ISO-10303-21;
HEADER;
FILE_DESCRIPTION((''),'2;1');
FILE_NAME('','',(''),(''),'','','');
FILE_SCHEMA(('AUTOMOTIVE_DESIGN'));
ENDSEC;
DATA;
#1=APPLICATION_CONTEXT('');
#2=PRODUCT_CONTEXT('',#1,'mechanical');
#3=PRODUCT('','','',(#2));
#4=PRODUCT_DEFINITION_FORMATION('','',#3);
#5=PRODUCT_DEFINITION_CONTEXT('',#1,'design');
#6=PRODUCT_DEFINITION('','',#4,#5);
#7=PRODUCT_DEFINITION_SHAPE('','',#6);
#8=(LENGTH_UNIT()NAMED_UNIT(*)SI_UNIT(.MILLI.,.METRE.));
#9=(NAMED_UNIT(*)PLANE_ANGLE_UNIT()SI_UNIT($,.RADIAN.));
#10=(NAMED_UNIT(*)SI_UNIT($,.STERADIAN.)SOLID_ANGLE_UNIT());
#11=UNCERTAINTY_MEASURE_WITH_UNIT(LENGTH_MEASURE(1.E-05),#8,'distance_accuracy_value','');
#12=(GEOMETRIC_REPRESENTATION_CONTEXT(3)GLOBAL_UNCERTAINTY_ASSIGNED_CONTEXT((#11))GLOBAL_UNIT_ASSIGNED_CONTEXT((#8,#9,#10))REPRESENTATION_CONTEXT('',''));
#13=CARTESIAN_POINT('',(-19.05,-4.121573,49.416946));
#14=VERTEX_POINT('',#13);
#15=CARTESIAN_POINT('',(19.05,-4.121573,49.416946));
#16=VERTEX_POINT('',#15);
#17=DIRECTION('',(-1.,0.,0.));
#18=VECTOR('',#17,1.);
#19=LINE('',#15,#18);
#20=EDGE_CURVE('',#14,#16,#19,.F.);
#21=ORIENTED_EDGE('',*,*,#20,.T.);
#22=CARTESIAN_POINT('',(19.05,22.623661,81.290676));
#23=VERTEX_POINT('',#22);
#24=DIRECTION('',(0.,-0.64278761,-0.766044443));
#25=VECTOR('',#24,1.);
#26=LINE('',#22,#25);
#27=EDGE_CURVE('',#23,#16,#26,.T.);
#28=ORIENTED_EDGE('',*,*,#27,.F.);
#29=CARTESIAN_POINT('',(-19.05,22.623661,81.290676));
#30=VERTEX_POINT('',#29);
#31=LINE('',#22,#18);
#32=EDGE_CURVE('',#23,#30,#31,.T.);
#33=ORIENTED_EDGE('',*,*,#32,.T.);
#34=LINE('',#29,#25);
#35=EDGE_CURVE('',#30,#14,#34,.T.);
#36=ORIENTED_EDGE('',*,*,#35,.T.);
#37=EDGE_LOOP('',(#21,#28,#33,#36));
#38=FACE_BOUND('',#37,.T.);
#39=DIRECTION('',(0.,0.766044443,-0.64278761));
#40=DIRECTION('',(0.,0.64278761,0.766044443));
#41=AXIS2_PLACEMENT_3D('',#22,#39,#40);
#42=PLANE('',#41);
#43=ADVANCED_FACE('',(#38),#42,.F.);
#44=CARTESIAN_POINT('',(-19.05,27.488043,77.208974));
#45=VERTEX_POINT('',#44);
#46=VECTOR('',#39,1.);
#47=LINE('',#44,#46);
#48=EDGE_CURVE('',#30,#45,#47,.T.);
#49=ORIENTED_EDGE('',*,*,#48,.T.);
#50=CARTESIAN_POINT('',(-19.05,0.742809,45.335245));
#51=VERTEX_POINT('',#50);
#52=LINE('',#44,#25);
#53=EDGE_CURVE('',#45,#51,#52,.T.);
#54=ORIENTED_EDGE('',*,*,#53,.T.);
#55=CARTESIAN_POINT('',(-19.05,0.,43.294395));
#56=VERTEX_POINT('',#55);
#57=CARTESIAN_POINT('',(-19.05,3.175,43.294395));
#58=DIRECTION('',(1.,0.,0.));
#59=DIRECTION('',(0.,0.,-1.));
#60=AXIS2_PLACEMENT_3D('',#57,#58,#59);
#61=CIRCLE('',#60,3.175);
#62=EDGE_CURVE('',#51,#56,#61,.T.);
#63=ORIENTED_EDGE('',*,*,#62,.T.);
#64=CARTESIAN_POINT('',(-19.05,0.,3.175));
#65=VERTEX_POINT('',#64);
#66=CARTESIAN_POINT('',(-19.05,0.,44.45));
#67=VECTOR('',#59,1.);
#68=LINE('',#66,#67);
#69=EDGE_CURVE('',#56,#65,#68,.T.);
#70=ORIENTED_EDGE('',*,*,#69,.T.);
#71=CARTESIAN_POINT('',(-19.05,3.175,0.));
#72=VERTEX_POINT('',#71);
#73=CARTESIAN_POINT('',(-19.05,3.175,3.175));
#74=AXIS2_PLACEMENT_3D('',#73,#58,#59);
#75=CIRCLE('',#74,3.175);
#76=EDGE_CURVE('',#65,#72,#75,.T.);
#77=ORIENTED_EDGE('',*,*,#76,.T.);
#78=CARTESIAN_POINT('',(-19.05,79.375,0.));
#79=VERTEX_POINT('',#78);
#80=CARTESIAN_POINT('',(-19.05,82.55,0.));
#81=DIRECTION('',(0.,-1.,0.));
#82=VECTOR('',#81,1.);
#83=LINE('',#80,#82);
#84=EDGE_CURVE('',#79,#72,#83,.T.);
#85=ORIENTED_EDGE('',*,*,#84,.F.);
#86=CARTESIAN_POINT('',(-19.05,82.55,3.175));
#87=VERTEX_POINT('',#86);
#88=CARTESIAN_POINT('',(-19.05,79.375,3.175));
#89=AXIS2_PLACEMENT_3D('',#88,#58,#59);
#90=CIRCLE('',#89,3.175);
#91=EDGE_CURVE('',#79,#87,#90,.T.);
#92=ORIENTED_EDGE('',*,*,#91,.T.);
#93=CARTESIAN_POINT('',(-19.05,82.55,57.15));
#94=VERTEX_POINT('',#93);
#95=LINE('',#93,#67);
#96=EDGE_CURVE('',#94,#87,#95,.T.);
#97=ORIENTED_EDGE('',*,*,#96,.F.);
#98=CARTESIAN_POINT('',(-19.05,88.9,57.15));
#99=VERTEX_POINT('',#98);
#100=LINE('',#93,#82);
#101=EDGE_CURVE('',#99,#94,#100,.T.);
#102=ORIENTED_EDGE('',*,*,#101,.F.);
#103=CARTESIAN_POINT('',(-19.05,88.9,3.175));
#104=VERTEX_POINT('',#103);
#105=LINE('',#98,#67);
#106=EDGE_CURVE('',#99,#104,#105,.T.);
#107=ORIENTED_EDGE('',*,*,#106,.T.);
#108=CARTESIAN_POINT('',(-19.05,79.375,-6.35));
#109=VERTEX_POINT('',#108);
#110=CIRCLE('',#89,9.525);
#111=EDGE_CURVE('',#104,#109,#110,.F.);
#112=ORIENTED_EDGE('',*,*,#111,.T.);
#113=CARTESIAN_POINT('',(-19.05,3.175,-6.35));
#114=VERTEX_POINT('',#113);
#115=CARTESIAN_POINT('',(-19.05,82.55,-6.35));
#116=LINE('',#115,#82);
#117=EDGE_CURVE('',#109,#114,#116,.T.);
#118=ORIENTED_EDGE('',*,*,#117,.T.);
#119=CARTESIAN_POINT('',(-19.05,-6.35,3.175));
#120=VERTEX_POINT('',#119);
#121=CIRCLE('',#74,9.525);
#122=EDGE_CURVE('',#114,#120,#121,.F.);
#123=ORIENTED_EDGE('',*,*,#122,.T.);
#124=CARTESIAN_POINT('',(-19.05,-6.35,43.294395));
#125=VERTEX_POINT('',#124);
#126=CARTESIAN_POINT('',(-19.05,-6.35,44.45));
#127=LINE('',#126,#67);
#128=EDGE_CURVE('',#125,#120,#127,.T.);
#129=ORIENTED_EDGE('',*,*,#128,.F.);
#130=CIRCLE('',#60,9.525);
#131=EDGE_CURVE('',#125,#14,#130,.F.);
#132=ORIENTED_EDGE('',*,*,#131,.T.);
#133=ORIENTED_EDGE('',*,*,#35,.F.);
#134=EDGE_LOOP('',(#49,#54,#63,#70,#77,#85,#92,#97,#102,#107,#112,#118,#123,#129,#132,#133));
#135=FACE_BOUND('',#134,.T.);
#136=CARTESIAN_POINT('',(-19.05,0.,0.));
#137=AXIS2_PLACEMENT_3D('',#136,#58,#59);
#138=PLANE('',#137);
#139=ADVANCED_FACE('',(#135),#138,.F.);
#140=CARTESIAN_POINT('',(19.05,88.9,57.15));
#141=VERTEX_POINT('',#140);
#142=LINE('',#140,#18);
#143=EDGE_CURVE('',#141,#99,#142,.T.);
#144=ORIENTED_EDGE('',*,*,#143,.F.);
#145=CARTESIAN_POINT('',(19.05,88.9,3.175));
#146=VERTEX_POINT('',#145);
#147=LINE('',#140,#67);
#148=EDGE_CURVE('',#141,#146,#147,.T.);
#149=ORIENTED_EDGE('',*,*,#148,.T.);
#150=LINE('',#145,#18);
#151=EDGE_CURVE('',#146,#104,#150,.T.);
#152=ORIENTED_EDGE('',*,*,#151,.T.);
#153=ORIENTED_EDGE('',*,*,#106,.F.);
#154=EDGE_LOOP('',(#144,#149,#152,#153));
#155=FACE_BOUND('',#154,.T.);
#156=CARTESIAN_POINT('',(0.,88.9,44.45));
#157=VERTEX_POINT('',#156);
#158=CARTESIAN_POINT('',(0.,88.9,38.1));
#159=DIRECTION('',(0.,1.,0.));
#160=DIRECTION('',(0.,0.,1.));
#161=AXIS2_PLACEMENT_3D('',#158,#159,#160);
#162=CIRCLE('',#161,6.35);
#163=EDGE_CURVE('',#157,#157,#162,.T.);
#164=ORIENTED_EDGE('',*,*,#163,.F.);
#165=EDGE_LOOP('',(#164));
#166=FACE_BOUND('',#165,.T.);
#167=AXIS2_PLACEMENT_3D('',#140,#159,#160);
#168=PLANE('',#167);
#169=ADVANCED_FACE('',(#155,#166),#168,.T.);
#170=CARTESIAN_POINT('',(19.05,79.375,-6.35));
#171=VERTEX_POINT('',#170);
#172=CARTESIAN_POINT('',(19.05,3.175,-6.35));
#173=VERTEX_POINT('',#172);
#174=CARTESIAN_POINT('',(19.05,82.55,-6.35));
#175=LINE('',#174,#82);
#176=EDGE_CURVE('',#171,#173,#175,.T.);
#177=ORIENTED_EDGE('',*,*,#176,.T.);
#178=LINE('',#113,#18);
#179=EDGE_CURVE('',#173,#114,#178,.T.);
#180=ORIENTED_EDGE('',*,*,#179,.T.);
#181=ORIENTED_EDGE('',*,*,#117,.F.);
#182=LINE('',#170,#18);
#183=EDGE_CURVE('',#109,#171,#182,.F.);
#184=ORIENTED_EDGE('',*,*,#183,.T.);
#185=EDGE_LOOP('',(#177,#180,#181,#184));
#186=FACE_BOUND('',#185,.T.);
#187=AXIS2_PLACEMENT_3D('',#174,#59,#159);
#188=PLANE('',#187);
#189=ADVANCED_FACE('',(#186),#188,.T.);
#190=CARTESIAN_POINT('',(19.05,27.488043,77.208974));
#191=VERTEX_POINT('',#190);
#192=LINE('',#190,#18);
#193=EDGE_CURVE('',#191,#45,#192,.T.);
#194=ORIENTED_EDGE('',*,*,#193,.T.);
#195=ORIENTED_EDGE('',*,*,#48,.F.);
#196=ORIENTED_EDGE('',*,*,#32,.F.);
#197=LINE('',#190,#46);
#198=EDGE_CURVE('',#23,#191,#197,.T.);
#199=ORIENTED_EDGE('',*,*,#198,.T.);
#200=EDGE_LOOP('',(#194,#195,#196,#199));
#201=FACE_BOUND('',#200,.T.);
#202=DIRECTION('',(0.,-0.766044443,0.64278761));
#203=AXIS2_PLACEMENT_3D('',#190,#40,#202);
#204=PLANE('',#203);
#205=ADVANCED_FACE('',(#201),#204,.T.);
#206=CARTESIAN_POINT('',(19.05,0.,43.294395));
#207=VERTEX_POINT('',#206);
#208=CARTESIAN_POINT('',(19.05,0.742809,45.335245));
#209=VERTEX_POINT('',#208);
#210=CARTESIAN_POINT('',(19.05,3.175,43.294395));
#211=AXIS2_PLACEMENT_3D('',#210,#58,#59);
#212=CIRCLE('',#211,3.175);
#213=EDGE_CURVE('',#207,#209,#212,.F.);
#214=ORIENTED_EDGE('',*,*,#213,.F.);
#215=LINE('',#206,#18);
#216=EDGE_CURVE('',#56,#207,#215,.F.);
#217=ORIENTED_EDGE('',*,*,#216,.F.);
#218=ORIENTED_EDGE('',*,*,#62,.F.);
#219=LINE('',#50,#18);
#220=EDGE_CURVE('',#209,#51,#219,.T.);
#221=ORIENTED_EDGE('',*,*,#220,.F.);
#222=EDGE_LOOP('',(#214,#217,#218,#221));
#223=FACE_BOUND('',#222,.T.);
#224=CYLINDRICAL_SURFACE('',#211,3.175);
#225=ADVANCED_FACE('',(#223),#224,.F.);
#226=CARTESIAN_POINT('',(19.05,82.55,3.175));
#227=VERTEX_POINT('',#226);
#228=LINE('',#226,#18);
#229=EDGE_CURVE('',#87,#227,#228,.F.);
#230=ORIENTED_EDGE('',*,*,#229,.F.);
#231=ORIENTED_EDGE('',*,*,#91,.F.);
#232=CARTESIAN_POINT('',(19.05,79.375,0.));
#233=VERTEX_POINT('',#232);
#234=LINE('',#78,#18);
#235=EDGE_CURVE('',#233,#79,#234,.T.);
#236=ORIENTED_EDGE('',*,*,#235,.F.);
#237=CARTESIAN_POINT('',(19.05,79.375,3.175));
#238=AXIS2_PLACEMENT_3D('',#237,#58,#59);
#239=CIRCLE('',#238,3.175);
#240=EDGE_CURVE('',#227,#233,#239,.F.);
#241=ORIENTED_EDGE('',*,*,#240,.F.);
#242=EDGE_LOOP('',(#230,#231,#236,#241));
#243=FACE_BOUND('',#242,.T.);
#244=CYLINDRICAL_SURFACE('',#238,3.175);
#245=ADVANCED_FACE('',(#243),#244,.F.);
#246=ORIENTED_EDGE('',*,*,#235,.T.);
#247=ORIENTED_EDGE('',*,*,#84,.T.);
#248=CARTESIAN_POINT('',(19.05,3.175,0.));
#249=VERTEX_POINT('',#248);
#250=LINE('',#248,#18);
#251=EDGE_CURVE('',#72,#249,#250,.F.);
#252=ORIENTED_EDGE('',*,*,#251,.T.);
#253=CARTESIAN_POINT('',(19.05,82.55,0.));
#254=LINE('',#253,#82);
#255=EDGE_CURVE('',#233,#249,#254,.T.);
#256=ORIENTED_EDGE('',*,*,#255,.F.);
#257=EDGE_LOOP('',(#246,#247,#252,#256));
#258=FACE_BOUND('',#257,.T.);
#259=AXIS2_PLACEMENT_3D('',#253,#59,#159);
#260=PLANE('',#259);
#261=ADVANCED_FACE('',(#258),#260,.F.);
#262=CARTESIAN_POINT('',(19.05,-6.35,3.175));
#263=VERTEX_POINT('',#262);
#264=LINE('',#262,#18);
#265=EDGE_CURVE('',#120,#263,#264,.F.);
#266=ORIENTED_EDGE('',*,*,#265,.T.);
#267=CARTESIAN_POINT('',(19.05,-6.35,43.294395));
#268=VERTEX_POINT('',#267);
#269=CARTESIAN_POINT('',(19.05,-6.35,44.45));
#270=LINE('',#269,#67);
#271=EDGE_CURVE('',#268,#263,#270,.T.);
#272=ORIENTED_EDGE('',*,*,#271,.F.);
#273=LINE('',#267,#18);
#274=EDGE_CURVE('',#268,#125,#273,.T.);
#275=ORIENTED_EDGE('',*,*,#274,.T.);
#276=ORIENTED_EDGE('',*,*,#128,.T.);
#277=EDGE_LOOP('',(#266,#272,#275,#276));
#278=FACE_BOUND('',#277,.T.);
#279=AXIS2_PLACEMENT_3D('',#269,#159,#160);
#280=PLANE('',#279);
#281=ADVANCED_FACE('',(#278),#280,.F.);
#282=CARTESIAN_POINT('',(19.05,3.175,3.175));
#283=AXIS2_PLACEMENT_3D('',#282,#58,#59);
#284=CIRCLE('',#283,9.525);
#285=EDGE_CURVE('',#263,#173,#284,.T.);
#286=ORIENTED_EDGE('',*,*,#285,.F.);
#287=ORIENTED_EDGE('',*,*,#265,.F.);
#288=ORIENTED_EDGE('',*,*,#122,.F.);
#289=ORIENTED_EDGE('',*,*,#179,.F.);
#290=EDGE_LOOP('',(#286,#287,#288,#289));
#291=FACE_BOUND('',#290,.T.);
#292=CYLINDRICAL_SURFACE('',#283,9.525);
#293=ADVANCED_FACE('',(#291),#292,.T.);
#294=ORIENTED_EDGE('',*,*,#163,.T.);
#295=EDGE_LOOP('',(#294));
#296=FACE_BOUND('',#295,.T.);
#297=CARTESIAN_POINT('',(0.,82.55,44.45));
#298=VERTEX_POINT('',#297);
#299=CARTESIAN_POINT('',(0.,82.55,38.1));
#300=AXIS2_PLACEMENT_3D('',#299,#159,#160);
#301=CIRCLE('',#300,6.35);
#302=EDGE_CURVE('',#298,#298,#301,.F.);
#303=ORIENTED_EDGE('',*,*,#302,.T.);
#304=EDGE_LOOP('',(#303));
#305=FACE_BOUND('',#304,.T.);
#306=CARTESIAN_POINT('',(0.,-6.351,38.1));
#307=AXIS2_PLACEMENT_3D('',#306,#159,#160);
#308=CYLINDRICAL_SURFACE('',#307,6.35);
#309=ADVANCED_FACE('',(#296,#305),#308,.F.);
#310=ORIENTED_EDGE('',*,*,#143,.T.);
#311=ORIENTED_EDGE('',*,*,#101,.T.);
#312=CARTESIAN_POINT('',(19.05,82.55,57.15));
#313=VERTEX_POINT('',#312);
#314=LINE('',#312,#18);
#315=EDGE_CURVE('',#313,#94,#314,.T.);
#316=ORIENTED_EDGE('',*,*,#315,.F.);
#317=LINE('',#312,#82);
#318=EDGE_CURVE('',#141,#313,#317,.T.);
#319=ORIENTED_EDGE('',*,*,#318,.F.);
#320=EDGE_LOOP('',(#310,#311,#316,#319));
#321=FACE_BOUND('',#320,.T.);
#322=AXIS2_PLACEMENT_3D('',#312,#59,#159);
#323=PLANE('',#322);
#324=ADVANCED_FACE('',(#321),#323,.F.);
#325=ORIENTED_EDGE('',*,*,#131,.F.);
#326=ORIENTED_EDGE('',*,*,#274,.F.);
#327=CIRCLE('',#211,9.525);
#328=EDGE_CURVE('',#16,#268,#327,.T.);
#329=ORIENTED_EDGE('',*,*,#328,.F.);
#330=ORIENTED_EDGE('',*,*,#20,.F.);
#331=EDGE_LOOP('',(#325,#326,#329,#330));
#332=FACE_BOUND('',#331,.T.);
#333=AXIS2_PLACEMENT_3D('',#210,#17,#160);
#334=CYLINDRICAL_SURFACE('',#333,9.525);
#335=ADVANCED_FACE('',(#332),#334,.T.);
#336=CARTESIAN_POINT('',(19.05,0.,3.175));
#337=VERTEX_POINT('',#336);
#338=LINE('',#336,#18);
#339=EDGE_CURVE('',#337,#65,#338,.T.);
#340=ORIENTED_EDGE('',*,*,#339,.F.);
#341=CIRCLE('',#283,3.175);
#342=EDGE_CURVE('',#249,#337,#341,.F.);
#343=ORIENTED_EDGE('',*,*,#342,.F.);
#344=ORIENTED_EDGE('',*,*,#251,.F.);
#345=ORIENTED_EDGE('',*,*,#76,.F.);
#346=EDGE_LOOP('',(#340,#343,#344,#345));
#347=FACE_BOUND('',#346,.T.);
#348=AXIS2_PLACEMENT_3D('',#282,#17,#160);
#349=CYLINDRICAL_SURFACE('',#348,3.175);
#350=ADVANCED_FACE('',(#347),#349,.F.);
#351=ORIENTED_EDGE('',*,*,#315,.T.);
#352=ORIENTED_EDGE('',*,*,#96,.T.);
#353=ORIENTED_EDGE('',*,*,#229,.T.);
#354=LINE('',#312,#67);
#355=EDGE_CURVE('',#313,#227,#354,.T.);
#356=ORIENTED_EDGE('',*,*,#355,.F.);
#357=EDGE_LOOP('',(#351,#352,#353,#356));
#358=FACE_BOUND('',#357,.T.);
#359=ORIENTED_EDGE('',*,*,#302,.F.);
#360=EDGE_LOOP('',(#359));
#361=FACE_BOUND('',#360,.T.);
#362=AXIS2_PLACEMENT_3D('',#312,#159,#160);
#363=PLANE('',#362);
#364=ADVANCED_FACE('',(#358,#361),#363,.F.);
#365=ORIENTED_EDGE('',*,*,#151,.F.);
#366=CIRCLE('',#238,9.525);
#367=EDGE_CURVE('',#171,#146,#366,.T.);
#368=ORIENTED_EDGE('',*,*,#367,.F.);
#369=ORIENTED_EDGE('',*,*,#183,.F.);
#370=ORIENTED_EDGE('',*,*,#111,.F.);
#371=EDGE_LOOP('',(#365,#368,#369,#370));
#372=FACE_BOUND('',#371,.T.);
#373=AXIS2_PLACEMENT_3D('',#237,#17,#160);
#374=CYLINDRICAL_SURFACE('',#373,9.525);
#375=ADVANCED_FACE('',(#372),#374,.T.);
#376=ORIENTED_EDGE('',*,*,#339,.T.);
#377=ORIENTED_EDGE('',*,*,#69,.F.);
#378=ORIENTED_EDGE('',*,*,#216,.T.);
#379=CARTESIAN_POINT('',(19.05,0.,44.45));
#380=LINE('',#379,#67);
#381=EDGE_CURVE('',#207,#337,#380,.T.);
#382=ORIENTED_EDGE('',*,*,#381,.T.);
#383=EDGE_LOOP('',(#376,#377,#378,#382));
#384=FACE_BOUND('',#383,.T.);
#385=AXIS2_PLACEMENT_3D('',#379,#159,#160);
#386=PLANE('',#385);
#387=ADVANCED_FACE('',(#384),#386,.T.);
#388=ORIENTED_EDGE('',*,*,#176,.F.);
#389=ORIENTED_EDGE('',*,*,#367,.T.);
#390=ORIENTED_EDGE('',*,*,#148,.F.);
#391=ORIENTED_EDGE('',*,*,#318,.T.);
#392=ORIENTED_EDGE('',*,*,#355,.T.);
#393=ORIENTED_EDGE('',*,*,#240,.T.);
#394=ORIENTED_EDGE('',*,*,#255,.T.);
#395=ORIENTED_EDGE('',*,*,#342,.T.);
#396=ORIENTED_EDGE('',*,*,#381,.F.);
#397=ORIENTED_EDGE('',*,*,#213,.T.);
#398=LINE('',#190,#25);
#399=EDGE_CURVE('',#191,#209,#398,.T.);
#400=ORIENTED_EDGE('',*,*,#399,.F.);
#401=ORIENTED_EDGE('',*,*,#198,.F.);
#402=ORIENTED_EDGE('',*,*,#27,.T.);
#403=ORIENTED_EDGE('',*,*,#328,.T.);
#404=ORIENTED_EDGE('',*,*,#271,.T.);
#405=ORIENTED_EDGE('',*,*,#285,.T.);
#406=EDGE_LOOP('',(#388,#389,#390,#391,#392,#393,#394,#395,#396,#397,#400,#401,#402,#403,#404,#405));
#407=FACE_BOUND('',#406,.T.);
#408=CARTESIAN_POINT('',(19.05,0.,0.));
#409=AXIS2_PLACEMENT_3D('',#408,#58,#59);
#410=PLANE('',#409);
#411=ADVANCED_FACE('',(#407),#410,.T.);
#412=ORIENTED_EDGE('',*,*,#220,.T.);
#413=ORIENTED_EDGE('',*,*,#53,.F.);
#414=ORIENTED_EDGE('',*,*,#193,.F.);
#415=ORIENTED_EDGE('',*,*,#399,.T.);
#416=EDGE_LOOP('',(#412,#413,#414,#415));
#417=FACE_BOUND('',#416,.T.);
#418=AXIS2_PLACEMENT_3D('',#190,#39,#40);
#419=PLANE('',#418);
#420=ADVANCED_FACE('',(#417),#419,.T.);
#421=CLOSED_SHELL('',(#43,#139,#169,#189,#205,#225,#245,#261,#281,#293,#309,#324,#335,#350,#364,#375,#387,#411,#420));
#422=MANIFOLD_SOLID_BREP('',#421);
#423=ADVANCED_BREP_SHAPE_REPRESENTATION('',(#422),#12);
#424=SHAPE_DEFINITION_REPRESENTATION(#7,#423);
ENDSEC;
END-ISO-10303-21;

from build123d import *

# Parameters (mm, degrees)
BOSS_EXTRUDE1_DEPTH = 19.05
SHELL1_T            = 6.35
FILLET1_R           = 3.175
FILLET2_R           = 9.525
CUT_EXTRUDE1_REACH  = 128.663
SKETCH2_R           = 6.35


with BuildPart() as part:
    # Sketch1 → Boss-Extrude1 (new, symmetric)
    with BuildSketch(Plane(origin=(0, 0, 0), x_dir=(0, 0, -1), z_dir=(1, 0, 0))):
        Polygon((-57.15, 82.55), (0, 82.55), (0, 0), (-44.45, 0), (-77.208974413, 27.488043348), (-57.15, 51.393398168), align=None)
    extrude(amount=BOSS_EXTRUDE1_DEPTH, both=True)

    # Shell1
    shell1_openings = [part.faces().sort_by_distance(p)[0] for p in [
        (19.05, 40.856533518, 31.097326269),
        (0, 39.440720758, 67.179487206),
        (-19.05, 40.856533518, 31.097326269),
        (0, 66.971699084, 57.15),
    ]]
    offset(amount=SHELL1_T, openings=shell1_openings, kind=Kind.INTERSECTION)

    # Fillet1
    # the kernel refuses this fillet: 3.175 mm, written as the material it adds along each edge
    with BuildSketch(Plane(origin=(19.05, 0, 0), x_dir=(0, 0, 1), z_dir=(-1, 0, 0)), Plane(origin=(19.05, 82.55, 0), x_dir=(0, -1, 0), z_dir=(-1, 0, 0))) as fillet1_piece_1:
        with BuildLine():
            CenterArc((FILLET1_R, FILLET1_R), FILLET1_R, 180, 90)
            Line((0, FILLET1_R), (0, 0))
            Line((0, 0), (FILLET1_R, 0))
        make_face()
    extrude(amount=38.1)
    with BuildSketch(Plane(origin=(19.05, 0, 44.45), x_dir=(0, 0.6427876096865391, 0.7660444431189782), z_dir=(-1, 0, 0))) as fillet1_piece_2:
        with BuildLine():
            CenterArc((FILLET1_R * 0.363970234266, FILLET1_R), FILLET1_R, 230, 40)
            Line((-FILLET1_R * 0.27881737542, FILLET1_R * 0.233955556881), (0, 0))
            Line((0, 0), (FILLET1_R * 0.363970234266, 0))
        make_face()
    extrude(amount=38.1)

    # Fillet2
    fillet2_edges = [part.edges().sort_by_distance(p)[0] for p in [
        (0, -6.35, 46.761210988),
        (0, -6.35, -6.35),
        (0, 88.9, -6.35),
    ]]
    fillet(fillet2_edges, radius=FILLET2_R)

    # Sketch2 → Cut-Extrude1 (cut, up to next)
    with BuildSketch(Plane(origin=(0, 88.9, 0), x_dir=(-1, 0, 0), z_dir=(0, 1, 0)), mode=Mode.PRIVATE) as cut_extrude1_sk1:
        with Locations(Location((0, 38.1, 0), (0, 0, 90))):
            Circle(SKETCH2_R)
    cut_extrude1_tool1 = extrude(cut_extrude1_sk1.sketch, amount=-CUT_EXTRUDE1_REACH, mode=Mode.PRIVATE) & part.part
    add(cut_extrude1_tool1.solids().sort_by_distance((0, 88.9, 38.1))[0], mode=Mode.SUBTRACT)


solid = part.part
